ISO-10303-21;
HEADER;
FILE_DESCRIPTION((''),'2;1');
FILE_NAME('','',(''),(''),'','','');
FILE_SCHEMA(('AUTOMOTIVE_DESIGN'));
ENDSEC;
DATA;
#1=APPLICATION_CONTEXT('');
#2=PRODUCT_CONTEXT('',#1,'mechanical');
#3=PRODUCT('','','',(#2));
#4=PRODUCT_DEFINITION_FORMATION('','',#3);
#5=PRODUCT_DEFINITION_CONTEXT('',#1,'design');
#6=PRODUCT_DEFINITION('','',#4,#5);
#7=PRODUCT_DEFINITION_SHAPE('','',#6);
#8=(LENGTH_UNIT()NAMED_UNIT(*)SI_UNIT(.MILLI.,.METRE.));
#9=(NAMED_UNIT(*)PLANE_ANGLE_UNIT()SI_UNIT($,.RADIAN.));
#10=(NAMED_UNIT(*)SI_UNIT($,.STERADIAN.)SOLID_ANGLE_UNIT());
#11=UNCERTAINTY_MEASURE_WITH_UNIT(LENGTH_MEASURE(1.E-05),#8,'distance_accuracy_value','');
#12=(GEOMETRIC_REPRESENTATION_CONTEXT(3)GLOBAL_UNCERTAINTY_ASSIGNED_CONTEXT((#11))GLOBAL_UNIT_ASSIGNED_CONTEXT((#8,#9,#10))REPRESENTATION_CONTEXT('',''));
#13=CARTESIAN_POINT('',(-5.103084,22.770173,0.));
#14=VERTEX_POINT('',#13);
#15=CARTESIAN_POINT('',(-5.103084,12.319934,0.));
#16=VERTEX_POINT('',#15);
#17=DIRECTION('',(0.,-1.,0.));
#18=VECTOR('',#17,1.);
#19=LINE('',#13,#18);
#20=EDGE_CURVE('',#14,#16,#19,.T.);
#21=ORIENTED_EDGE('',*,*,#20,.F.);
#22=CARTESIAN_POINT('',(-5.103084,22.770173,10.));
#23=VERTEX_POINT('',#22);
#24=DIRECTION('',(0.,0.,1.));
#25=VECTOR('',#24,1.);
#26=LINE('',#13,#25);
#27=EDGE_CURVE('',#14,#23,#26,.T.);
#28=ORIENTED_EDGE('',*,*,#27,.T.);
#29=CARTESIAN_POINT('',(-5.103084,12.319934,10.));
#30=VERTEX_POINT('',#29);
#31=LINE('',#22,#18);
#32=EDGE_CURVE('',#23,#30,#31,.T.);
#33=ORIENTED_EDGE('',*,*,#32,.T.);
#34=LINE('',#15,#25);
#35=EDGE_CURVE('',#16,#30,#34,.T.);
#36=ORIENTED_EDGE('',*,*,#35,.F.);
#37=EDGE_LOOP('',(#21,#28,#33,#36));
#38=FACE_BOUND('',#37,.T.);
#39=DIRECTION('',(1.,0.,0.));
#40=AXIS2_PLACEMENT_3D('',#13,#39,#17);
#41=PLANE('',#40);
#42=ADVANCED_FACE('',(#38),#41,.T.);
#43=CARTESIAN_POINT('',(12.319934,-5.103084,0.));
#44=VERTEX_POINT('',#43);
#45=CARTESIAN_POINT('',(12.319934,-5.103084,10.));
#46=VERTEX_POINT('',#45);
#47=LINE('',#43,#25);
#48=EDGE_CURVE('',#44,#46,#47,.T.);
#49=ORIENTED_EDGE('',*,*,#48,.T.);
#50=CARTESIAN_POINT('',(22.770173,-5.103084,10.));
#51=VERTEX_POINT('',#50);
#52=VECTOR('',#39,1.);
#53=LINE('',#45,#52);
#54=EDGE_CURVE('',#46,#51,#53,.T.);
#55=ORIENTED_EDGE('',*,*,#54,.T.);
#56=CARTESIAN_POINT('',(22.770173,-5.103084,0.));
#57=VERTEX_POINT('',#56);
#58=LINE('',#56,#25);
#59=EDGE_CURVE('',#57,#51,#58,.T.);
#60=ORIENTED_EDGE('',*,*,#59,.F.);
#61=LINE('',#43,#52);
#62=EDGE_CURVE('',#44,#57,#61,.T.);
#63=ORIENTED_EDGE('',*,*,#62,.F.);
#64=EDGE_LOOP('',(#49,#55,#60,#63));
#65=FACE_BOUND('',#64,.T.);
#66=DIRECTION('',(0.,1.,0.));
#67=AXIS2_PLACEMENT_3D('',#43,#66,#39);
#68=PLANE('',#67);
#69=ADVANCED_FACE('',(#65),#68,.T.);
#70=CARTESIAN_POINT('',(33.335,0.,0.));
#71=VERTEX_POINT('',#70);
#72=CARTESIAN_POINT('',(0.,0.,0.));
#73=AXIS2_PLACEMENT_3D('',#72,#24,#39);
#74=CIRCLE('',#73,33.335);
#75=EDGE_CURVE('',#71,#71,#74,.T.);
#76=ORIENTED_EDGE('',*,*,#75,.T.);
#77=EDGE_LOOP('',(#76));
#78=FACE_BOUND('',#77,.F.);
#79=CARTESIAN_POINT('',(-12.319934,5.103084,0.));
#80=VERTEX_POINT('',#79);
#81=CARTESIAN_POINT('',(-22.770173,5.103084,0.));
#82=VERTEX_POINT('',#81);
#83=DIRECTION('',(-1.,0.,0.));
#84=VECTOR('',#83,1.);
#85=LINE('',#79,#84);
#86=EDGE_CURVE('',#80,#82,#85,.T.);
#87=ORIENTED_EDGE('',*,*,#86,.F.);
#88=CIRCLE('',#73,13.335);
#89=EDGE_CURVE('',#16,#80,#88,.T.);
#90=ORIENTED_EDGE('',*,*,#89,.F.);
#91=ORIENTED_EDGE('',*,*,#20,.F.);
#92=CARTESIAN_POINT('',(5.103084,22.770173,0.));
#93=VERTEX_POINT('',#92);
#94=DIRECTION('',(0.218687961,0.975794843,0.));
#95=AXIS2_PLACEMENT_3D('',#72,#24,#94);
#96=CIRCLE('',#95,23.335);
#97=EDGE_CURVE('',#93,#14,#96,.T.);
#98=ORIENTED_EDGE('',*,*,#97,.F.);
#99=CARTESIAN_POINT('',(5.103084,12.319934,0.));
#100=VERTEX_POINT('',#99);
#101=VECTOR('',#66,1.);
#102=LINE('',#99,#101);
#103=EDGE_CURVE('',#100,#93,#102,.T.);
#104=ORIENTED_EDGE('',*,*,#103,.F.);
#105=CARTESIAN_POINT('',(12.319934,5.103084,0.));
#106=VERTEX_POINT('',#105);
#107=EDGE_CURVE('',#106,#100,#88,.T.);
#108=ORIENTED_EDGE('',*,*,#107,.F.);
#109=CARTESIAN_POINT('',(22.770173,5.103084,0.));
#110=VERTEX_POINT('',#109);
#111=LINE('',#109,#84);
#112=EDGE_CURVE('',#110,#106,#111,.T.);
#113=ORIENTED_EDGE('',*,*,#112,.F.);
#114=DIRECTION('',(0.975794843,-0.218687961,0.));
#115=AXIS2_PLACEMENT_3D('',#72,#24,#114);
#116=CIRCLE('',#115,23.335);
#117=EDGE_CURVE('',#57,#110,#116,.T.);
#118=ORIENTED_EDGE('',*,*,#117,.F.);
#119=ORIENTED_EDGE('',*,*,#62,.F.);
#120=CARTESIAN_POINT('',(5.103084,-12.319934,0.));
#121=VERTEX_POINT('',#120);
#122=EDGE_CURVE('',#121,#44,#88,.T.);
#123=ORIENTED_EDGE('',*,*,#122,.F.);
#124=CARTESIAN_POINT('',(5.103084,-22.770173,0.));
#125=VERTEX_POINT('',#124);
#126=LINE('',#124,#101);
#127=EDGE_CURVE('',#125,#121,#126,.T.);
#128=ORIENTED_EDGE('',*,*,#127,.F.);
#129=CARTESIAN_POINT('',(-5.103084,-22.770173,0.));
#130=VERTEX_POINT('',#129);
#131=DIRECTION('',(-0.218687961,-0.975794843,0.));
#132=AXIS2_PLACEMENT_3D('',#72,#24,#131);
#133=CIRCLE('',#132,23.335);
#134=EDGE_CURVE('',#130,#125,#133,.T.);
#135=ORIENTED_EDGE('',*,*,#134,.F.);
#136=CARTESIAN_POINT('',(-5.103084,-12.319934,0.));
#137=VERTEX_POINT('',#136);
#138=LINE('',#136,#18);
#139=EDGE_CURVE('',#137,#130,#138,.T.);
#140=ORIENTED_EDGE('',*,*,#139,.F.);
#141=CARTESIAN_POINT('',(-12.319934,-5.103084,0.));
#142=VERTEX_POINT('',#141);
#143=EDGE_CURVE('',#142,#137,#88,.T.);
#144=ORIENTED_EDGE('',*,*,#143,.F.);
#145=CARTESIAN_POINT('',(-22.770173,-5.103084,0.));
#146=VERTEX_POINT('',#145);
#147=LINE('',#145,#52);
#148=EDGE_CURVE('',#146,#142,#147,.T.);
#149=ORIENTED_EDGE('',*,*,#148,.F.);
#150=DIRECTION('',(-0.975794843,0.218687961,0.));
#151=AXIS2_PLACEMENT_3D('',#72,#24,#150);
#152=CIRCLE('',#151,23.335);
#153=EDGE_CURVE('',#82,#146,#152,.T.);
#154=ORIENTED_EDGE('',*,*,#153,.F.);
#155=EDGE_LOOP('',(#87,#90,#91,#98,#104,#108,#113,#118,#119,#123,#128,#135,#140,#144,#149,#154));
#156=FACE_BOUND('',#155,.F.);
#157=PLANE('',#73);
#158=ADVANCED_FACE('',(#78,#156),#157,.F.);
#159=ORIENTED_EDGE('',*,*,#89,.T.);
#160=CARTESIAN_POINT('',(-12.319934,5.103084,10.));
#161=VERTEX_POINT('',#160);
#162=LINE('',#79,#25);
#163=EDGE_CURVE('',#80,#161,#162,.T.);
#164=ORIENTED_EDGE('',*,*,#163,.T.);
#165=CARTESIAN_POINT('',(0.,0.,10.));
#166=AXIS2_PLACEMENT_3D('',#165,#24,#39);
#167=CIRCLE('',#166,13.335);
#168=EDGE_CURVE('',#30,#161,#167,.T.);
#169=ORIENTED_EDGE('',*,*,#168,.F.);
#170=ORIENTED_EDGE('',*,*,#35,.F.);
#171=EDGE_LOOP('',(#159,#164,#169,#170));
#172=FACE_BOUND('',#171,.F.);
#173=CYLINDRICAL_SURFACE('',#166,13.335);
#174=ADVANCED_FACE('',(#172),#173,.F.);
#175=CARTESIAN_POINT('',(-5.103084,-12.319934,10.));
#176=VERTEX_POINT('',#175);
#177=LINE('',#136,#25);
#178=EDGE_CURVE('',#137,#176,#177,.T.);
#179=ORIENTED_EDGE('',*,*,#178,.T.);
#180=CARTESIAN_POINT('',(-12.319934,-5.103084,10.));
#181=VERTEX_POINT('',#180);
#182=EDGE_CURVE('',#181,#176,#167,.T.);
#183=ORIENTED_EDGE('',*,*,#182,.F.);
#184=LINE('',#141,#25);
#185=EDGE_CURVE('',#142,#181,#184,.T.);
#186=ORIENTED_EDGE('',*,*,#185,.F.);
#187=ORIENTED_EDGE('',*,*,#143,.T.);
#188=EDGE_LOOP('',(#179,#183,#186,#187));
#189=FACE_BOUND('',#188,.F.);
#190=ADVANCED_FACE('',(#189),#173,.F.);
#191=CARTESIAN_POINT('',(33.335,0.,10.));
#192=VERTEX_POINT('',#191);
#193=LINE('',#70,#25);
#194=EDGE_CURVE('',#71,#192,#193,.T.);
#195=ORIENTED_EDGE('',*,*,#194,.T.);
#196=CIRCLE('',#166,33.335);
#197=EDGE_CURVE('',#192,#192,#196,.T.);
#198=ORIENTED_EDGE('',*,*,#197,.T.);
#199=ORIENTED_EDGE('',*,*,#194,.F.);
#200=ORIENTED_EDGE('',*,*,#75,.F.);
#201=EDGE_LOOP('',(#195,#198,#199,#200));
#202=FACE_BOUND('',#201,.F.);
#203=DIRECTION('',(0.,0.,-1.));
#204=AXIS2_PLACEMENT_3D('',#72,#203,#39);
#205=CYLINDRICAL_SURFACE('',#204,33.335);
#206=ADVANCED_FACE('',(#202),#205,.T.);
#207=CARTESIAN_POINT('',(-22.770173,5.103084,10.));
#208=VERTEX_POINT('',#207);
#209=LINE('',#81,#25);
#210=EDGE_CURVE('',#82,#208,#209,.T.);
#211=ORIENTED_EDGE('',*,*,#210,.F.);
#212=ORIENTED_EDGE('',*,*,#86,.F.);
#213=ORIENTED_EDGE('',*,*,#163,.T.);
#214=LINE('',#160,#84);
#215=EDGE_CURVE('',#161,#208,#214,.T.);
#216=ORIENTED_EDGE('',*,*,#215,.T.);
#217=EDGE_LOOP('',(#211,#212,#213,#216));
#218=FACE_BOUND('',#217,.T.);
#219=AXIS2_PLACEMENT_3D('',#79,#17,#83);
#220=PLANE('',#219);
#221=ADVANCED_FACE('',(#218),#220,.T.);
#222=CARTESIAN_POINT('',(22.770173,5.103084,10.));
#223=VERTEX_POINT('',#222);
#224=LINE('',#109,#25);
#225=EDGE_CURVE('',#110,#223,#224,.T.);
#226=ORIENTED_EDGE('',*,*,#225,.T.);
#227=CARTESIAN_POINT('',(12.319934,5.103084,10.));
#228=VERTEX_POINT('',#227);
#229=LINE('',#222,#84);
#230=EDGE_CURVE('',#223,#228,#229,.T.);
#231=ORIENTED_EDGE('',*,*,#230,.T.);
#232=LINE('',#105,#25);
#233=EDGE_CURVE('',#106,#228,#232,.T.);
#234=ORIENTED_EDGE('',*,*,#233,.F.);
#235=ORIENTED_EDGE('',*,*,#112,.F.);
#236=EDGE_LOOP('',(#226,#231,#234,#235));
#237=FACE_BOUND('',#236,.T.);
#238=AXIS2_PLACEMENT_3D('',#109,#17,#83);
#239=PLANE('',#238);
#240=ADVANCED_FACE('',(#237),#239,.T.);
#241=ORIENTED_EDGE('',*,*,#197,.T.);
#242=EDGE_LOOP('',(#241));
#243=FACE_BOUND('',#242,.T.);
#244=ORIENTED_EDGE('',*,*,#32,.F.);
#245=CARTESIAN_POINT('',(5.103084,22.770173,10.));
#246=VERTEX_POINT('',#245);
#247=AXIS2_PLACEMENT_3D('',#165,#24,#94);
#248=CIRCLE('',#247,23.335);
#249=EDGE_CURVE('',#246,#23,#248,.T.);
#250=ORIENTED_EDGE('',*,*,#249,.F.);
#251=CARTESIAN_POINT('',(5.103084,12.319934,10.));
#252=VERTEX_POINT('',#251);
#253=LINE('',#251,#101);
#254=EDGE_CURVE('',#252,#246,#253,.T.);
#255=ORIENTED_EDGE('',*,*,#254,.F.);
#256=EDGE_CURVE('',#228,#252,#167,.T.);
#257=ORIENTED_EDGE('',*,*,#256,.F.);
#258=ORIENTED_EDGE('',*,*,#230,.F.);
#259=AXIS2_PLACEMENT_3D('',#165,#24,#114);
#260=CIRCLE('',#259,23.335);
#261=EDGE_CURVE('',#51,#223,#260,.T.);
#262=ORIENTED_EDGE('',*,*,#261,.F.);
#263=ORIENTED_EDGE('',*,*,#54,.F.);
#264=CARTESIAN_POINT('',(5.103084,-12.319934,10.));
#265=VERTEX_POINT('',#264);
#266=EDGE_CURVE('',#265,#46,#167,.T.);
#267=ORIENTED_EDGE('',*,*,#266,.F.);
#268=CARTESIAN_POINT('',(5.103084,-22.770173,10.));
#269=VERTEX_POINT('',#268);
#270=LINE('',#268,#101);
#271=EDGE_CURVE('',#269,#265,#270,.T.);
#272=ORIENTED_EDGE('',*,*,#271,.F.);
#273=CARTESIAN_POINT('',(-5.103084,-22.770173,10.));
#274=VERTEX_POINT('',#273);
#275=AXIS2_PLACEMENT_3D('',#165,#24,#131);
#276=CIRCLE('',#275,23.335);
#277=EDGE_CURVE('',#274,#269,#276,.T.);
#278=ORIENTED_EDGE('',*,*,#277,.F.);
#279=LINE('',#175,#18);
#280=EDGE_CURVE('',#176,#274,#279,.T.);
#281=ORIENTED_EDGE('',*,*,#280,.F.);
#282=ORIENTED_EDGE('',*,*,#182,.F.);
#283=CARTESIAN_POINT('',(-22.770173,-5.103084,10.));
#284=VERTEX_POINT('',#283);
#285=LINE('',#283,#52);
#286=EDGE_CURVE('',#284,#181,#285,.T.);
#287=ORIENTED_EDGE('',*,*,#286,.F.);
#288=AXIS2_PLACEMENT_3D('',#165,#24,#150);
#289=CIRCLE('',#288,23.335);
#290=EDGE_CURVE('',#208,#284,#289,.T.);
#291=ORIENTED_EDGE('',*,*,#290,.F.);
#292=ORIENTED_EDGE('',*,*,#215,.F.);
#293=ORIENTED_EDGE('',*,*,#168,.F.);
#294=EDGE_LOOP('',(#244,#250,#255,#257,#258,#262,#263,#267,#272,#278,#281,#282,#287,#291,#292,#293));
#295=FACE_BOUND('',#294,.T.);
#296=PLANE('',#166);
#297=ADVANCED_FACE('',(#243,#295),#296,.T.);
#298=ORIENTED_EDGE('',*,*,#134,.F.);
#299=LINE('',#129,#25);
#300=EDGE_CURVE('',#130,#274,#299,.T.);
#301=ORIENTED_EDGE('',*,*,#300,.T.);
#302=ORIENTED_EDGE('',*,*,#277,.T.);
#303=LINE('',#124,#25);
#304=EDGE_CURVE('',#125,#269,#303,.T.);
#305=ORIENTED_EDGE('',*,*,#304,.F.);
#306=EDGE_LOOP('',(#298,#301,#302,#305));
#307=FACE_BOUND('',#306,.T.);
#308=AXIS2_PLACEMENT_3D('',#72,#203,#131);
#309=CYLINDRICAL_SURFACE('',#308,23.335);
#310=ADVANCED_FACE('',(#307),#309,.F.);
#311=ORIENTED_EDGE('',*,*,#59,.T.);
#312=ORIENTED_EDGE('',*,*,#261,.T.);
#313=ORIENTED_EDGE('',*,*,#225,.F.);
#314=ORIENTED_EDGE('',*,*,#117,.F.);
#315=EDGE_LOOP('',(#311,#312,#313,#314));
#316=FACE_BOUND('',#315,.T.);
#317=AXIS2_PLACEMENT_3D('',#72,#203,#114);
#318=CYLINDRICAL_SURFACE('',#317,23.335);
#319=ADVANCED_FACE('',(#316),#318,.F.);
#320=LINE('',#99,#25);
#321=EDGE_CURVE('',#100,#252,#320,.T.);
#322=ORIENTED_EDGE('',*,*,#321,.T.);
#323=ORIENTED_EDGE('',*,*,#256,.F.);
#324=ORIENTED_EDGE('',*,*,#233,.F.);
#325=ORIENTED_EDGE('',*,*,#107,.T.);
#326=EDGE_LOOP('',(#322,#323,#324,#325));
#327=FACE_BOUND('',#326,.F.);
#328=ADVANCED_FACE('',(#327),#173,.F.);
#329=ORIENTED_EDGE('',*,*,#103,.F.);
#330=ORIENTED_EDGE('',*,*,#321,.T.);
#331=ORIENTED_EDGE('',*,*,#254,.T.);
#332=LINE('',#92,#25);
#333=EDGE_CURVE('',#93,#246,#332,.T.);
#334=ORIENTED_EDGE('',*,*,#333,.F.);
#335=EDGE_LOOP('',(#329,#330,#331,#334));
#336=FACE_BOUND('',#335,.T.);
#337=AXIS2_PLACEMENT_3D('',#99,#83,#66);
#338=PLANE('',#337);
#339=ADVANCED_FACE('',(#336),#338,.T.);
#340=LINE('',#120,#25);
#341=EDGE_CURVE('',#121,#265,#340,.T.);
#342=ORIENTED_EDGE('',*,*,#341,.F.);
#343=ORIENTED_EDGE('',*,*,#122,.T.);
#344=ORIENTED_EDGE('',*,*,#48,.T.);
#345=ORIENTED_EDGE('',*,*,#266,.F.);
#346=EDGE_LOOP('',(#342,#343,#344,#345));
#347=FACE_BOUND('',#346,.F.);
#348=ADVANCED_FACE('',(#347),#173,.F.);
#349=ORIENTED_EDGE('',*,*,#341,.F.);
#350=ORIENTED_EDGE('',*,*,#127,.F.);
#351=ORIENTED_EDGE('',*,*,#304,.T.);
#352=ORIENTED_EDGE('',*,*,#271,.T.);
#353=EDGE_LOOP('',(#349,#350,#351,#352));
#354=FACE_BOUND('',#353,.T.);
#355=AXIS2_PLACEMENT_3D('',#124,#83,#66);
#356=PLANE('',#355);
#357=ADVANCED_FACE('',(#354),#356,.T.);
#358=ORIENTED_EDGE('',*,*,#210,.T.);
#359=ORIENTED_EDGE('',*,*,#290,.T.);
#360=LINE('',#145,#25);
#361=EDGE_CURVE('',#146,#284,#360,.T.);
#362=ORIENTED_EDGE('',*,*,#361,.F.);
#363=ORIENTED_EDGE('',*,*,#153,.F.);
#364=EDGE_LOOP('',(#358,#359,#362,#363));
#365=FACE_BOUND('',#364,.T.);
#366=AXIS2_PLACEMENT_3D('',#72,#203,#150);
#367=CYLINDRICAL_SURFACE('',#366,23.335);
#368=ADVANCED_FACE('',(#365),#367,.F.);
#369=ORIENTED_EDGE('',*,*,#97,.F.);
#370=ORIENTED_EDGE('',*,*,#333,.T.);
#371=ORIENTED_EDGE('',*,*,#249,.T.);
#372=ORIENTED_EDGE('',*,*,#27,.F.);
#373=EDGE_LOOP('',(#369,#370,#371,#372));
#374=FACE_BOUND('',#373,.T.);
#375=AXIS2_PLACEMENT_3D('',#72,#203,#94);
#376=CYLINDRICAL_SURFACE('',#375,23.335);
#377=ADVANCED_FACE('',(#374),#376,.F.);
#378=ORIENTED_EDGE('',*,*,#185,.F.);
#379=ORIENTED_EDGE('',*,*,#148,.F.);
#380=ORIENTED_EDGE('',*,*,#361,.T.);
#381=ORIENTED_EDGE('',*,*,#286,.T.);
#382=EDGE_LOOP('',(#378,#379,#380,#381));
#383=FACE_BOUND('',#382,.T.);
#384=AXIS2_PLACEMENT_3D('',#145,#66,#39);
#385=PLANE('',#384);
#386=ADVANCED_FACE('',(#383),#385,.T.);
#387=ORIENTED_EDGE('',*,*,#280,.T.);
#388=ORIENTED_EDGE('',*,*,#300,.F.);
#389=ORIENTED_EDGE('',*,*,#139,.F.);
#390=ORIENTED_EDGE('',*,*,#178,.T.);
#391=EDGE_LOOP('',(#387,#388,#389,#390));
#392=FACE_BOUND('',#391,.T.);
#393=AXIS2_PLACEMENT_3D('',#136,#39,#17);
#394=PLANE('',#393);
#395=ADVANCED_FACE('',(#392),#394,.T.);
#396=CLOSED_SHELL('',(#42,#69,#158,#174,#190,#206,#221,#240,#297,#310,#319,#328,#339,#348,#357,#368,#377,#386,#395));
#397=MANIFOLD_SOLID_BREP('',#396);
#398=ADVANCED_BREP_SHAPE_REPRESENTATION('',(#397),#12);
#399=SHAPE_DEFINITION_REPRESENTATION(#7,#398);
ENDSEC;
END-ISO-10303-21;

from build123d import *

# Parameters (mm, degrees)
F0_R            = 33.335
F1_DEPTH        = 10
F2_R            = 13.335
F3_DEPTH        = 10
F5_DEPTH        = 10
F5_COPIES_COUNT = 4


# Not quite as in the source:
# - a pattern or mirror of a feature is missing from the dataset's text; its kind, count and spacing are read off the source's solid


with BuildPart() as f1:
    # F0 (on Top) → F1 (new body)
    with BuildSketch(Plane.XY):
        Circle(F0_R)
    extrude(amount=F1_DEPTH)

    # F2 (on face) → F3 (cut, through all)
    with BuildSketch(Plane.XY.offset(10)):
        Circle(F2_R)
    extrude(amount=-F3_DEPTH, mode=Mode.SUBTRACT)

    # F4 (on Top) → F5 (cut, through all)
    with BuildSketch(Plane.XY):
        with BuildLine():
            Line((22.7701726623, 5.1030835706), (12.319933566, 5.1030835706))
            ThreePointArc((12.319933566, 5.1030835706), (13.335, 0), (12.319933566, -5.1030835706))
            Line((12.319933566, -5.1030835706), (22.7701726623, -5.1030835706))
            ThreePointArc((22.7701726623, -5.1030835706), (23.335, 0), (22.7701726623, 5.1030835706))
        make_face()
    f5 = extrude(amount=F5_DEPTH, mode=Mode.SUBTRACT)

    # F5_copies: F5 ×4 about axis
    f5_copies_axis = Axis((0, 0, 0), (0, 0, 1))
    for i in range(1, F5_COPIES_COUNT):
        add(f5.rotate(f5_copies_axis, i * 360 / F5_COPIES_COUNT), mode=Mode.SUBTRACT)


solid = f1.part
